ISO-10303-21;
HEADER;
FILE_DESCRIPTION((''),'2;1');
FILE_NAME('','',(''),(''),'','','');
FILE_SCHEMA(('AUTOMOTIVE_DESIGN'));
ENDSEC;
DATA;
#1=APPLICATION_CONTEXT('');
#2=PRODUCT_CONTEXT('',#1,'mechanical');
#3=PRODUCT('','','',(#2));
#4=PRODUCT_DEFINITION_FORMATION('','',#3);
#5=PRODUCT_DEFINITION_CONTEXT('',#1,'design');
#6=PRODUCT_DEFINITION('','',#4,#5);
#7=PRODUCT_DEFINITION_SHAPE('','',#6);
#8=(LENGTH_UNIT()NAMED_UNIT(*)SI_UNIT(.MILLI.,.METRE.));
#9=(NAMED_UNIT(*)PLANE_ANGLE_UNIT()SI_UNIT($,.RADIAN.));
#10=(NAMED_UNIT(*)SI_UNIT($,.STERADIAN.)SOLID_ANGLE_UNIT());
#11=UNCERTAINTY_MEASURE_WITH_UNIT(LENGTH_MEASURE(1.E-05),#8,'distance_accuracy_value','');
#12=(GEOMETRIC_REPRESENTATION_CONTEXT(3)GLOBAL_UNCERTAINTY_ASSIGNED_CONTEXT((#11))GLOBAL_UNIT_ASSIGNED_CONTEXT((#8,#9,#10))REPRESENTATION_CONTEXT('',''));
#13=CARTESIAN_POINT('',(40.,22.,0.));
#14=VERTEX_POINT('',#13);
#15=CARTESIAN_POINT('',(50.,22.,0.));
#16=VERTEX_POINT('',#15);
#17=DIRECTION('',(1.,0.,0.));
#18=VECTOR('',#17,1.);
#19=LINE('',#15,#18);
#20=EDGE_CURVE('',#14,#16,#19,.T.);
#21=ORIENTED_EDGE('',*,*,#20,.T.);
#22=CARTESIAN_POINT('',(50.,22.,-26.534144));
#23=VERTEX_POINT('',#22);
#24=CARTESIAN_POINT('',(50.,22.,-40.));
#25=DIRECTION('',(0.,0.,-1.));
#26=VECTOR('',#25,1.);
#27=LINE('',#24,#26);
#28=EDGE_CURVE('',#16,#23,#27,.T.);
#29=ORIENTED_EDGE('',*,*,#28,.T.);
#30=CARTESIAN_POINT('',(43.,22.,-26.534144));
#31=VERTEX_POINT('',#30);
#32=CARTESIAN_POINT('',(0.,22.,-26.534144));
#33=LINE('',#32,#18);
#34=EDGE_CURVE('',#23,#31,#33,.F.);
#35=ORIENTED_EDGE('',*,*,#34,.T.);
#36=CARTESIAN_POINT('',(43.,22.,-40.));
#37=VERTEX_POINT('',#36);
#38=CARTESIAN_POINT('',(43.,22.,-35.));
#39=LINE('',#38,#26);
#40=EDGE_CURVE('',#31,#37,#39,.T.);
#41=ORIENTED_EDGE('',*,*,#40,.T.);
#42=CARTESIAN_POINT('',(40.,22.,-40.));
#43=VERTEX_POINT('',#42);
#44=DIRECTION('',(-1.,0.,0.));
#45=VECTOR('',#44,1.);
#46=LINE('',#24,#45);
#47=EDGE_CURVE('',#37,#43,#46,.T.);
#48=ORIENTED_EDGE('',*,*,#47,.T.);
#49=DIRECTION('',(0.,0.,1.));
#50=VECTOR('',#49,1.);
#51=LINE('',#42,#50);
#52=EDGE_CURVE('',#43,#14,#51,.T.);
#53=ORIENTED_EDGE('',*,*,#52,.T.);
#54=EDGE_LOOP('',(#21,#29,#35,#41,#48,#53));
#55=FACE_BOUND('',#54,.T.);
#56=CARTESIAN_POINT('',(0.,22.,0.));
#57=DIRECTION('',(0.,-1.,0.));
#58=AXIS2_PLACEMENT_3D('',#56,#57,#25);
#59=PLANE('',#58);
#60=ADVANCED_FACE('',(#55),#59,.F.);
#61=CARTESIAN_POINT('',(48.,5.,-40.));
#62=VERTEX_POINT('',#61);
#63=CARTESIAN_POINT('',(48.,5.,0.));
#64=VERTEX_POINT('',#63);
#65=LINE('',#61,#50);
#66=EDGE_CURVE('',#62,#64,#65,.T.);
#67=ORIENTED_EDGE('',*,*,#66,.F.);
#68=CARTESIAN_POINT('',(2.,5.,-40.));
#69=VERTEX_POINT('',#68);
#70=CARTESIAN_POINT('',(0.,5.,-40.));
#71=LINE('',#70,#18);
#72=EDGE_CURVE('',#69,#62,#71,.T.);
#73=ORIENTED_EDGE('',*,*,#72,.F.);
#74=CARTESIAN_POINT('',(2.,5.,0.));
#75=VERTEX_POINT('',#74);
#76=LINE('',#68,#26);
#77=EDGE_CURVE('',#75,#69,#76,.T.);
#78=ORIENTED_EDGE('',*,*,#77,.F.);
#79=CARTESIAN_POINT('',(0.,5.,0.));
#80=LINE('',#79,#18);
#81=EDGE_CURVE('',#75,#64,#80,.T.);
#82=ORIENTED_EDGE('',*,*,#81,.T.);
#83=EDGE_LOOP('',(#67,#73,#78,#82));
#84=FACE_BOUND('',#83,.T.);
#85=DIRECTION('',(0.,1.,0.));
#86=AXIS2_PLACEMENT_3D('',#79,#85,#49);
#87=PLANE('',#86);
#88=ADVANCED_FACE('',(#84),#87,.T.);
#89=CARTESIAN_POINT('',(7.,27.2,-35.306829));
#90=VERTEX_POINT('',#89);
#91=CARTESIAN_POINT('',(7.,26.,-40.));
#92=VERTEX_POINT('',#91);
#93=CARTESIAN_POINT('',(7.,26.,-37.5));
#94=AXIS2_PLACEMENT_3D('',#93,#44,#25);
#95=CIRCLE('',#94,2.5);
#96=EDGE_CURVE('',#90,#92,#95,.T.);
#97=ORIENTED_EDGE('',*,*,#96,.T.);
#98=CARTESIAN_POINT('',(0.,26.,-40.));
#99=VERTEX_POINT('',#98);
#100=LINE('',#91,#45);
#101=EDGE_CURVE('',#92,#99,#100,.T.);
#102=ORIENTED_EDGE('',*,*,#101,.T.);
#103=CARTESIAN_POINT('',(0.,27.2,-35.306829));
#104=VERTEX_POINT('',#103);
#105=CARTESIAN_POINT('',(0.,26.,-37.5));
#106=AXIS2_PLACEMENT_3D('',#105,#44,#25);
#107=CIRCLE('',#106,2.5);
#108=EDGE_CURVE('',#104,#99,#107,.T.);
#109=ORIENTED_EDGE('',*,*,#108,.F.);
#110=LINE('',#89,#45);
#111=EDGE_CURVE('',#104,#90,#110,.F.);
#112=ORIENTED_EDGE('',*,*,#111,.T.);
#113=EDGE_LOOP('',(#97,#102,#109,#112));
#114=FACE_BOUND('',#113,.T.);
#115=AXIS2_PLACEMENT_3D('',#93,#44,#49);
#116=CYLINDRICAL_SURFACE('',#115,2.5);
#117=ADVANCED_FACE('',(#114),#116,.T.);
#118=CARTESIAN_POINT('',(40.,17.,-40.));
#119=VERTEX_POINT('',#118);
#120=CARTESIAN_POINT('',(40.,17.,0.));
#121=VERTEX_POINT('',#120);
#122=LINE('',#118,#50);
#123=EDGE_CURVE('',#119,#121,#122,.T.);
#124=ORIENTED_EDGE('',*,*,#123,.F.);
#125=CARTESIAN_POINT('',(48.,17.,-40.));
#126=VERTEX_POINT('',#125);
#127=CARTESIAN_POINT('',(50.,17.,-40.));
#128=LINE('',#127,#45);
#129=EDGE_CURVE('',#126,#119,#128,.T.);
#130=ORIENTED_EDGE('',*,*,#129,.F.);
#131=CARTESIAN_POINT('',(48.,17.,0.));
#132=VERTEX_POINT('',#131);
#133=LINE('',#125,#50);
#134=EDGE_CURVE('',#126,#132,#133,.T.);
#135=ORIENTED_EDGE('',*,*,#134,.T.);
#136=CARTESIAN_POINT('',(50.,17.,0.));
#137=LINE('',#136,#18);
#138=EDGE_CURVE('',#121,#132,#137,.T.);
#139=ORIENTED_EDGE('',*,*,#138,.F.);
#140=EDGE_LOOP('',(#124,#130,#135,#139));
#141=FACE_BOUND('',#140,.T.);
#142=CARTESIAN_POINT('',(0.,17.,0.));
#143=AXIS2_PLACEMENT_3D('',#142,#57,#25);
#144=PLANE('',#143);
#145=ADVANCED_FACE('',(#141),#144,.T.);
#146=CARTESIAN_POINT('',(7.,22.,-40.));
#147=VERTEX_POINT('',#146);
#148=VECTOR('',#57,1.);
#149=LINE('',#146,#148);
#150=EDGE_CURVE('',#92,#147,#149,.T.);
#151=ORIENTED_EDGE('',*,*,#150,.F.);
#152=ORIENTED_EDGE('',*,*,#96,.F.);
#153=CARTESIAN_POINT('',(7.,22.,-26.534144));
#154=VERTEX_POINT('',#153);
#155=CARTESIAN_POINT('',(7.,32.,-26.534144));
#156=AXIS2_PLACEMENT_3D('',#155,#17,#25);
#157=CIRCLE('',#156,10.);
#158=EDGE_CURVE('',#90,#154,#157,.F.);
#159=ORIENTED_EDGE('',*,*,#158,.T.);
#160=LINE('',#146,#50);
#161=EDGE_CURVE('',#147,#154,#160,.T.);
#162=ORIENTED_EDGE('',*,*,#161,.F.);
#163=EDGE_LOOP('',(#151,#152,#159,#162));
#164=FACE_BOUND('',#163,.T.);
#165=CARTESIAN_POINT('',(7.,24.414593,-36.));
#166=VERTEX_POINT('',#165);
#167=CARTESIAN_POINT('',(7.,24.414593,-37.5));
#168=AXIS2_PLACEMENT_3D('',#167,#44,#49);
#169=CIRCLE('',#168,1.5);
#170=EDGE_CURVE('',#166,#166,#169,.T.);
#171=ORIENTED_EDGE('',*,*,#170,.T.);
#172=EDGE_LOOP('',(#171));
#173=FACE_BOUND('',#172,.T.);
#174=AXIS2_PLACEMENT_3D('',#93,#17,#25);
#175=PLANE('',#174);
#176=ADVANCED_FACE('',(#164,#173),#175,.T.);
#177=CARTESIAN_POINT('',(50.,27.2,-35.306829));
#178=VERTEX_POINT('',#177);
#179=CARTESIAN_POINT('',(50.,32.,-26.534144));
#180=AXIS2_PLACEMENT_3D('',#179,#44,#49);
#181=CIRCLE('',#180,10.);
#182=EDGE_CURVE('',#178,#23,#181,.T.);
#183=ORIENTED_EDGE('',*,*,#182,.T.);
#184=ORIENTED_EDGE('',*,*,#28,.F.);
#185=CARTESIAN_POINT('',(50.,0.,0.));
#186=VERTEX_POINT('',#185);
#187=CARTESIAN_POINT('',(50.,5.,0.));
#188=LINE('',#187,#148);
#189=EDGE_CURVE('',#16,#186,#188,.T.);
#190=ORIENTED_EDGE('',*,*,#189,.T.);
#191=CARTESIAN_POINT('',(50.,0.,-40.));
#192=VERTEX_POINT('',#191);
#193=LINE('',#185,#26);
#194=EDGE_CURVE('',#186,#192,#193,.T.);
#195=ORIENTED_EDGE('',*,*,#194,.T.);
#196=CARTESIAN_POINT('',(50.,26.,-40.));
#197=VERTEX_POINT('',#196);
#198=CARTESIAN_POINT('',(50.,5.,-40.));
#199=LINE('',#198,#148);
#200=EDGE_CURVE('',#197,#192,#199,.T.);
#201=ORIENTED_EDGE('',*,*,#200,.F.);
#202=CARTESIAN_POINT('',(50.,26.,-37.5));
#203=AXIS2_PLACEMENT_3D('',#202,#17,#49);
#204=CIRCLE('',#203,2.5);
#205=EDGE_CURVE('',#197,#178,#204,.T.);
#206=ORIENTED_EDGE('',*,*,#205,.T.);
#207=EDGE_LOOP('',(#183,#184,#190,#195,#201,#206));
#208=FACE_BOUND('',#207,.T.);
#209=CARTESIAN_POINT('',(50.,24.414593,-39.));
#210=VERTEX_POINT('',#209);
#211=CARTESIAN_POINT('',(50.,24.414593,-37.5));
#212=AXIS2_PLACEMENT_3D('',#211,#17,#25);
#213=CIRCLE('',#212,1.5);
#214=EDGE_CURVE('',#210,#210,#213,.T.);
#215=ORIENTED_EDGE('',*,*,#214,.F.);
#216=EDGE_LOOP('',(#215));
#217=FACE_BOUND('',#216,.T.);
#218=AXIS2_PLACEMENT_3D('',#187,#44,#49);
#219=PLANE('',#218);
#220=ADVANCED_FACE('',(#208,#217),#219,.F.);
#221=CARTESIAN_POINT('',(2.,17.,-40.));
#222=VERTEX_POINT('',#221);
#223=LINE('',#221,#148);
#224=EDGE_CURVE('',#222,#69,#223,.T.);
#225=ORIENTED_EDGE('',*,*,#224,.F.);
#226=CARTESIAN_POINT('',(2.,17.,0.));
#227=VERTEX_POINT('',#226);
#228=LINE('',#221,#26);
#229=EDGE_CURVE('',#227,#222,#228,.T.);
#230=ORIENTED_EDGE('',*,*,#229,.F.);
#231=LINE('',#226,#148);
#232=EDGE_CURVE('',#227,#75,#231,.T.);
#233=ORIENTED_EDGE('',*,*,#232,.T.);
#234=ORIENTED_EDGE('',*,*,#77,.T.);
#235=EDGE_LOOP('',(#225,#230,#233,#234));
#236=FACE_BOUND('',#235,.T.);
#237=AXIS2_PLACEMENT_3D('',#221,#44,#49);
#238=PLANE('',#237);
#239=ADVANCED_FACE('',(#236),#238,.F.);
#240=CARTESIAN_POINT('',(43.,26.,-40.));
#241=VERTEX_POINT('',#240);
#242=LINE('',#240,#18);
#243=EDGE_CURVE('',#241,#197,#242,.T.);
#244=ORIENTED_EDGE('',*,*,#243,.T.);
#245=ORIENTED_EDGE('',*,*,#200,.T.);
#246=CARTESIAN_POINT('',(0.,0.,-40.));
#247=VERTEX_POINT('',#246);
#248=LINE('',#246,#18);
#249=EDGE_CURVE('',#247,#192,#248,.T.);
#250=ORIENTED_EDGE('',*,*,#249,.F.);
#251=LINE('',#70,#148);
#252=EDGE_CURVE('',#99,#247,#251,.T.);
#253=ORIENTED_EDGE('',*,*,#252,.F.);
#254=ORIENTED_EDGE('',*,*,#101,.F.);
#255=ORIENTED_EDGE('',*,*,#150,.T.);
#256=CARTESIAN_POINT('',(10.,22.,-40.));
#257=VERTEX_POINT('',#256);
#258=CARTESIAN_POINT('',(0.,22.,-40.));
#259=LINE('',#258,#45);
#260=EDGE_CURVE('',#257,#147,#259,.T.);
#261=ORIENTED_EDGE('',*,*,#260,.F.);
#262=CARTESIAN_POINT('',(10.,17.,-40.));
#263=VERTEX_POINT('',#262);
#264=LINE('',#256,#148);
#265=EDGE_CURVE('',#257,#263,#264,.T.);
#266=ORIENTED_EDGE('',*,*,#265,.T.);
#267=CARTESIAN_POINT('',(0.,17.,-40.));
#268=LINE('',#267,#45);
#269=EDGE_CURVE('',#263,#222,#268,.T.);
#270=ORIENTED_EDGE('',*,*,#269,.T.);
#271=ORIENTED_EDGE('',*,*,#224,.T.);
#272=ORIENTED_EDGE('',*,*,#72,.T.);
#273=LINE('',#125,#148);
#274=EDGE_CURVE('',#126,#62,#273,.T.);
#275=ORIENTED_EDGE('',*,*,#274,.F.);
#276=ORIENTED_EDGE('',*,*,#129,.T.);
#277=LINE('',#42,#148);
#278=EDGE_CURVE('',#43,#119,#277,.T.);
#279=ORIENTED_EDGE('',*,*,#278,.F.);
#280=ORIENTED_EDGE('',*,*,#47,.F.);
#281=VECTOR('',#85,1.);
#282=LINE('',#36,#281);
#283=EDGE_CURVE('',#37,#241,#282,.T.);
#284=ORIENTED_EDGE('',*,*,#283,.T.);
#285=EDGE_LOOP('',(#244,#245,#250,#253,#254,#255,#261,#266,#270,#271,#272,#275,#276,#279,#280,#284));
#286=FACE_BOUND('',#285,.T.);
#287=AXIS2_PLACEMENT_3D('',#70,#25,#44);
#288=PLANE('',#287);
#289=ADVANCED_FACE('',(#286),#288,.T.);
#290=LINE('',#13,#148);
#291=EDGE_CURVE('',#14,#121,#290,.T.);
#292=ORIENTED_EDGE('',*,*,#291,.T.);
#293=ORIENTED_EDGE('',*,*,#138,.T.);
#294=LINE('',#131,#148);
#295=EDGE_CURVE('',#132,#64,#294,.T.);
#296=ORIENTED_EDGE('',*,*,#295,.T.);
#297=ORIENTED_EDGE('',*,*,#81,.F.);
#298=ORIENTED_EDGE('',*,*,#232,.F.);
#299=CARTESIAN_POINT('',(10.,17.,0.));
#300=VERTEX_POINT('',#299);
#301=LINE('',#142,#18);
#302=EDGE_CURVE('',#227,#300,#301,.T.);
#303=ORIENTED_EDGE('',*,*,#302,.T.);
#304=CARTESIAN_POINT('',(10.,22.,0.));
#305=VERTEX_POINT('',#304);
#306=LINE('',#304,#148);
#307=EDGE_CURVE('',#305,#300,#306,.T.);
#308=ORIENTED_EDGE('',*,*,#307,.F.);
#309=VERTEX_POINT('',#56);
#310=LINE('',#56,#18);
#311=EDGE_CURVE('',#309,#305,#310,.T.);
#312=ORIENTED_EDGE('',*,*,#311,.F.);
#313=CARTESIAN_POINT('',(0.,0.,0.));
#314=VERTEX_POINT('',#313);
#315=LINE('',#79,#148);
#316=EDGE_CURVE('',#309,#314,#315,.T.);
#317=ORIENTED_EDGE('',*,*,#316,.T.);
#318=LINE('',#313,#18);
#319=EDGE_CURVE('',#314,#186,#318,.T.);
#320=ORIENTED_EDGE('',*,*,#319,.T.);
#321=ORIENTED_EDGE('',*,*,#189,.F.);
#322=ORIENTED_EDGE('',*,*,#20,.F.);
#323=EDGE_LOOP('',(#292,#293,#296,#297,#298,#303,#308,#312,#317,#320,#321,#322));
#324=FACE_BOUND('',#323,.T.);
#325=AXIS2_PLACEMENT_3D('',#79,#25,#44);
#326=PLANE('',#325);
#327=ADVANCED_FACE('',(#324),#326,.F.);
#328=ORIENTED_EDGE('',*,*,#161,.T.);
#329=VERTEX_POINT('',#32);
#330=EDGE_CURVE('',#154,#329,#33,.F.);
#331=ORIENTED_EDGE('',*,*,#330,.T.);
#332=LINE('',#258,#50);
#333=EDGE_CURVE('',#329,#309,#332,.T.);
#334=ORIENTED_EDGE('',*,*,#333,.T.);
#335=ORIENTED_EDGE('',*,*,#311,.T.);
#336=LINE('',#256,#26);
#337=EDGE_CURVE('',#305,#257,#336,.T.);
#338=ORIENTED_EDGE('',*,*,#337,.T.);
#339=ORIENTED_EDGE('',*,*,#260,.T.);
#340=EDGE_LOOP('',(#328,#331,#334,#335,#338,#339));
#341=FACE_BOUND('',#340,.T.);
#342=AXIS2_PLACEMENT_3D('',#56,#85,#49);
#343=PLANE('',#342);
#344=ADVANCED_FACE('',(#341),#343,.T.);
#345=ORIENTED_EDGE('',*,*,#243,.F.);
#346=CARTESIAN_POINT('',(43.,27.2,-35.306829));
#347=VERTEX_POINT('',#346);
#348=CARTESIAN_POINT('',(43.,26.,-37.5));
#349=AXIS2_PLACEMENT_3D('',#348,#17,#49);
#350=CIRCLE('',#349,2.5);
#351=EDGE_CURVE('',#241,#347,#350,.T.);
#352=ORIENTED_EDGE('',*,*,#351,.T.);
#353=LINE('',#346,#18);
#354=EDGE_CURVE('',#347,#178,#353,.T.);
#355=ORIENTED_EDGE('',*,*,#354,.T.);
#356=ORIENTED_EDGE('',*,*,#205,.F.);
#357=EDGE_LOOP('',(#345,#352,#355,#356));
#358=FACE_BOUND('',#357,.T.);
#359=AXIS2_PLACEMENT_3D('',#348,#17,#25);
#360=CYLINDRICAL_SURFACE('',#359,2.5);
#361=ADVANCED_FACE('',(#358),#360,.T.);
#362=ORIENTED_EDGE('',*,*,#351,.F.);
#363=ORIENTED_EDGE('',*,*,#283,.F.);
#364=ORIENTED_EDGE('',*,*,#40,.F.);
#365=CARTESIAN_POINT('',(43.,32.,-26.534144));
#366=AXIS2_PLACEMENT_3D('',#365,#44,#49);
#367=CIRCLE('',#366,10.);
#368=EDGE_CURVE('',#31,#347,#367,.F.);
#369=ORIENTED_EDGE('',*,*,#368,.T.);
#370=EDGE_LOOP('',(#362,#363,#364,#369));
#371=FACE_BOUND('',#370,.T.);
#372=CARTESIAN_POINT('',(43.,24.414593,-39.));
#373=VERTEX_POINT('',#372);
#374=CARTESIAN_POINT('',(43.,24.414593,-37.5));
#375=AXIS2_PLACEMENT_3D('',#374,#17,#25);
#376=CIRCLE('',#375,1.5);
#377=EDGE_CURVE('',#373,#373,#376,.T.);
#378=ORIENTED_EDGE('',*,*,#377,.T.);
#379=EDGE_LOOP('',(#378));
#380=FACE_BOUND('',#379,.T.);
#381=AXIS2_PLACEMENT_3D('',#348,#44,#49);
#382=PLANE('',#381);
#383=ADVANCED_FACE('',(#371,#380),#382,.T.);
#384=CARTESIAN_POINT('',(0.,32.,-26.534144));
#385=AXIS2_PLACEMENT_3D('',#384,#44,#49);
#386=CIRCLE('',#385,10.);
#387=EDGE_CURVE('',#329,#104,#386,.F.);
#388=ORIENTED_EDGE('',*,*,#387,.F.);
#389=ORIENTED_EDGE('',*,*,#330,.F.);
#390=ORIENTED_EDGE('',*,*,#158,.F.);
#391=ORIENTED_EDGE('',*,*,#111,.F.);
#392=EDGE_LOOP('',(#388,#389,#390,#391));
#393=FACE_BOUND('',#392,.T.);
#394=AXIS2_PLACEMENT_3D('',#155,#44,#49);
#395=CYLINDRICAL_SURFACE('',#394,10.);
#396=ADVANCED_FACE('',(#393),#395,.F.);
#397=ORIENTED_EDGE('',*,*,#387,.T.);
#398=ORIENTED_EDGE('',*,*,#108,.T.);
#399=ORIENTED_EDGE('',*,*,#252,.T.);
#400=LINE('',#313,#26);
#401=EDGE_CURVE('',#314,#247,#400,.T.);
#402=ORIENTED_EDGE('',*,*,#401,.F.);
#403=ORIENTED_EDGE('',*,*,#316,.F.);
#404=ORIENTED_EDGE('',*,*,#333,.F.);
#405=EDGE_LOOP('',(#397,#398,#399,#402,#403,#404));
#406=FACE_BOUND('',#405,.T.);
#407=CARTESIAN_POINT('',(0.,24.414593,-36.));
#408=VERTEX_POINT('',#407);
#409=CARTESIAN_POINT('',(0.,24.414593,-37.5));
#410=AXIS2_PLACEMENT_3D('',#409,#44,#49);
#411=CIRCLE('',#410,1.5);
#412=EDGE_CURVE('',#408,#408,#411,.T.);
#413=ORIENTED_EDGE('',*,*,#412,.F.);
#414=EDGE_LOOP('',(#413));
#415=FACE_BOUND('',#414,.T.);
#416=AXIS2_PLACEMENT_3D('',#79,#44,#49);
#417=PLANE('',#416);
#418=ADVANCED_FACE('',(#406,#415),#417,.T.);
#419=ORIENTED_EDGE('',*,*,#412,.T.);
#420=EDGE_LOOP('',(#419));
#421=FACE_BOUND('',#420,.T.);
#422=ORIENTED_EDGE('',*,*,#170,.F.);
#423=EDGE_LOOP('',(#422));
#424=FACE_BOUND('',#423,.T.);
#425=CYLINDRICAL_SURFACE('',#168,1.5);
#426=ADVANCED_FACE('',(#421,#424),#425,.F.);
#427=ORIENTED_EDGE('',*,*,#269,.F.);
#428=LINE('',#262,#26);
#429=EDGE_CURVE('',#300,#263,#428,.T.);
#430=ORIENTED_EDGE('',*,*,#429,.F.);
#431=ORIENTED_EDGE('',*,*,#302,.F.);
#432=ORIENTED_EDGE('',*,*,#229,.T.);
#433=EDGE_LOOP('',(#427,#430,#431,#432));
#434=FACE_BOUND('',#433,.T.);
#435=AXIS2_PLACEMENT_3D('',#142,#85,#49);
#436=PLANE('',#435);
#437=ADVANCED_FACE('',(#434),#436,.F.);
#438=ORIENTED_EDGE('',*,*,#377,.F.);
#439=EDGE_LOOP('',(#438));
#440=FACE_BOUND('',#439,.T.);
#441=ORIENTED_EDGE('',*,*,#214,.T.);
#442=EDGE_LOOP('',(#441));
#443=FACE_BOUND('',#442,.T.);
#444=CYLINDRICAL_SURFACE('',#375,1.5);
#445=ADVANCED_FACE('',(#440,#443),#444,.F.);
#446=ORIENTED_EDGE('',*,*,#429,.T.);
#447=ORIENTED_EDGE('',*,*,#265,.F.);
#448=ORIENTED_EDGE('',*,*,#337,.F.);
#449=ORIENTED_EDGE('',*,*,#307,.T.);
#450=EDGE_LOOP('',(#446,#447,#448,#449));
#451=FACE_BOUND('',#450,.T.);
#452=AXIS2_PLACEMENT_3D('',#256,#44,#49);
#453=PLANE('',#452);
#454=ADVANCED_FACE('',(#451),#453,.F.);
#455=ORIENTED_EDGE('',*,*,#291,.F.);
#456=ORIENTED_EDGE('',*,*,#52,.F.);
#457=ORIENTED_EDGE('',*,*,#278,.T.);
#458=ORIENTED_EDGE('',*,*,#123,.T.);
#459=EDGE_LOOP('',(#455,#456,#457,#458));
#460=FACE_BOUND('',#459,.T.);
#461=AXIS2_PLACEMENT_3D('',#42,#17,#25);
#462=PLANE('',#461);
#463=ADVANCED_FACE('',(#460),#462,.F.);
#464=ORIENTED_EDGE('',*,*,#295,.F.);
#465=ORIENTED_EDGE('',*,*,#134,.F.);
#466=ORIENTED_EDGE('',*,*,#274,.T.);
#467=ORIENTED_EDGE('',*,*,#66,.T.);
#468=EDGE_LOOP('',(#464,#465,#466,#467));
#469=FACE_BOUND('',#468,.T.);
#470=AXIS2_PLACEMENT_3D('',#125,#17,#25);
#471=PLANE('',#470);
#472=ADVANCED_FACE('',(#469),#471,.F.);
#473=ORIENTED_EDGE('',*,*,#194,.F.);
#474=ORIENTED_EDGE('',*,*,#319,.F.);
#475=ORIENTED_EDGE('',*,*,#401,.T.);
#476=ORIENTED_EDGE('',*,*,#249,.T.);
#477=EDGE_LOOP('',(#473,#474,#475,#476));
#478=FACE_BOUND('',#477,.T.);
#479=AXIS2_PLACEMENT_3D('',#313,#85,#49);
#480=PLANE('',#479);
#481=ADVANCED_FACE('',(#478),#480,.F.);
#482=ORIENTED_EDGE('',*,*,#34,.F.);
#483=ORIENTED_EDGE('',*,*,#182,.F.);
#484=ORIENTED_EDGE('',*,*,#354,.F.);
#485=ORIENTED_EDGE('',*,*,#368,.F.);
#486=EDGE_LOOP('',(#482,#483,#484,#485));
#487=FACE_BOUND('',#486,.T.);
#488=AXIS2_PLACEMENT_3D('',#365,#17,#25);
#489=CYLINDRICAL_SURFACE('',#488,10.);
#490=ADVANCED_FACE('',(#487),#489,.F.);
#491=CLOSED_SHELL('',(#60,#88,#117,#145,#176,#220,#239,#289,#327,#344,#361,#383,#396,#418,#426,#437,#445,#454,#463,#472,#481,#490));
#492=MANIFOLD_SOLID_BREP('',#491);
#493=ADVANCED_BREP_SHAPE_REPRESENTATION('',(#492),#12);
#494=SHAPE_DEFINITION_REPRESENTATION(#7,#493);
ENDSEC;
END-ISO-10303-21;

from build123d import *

# Parameters (mm, degrees)
SKETCH1_W           = 50
SKETCH1_H           = 40
BOSS_EXTRUDE2_DEPTH = 5
SKETCH2_W           = 2
SKETCH2_H           = 40
BOSS_EXTRUDE4_DEPTH = 12
SKETCH3_W           = 10
SKETCH3_H           = 40
BOSS_EXTRUDE5_DEPTH = 5
SKETCH5_R           = 1.5
BOSS_EXTRUDE6_DEPTH = 7
FILLET1_R           = 10
BOSS_EXTRUDE7_START = -7
SKETCH6_R           = 1.5
BOSS_EXTRUDE7_DEPTH = 7
FILLET2_R           = 10


with BuildPart() as part:
    # Sketch1 → Boss-Extrude2 (new body)
    with BuildSketch(Plane(origin=(0, 0, 0), x_dir=(1, 0, 0), z_dir=(0, 1, 0))):
        with Locations((25, 20)):
            Rectangle(SKETCH1_W, SKETCH1_H)
    extrude(amount=BOSS_EXTRUDE2_DEPTH)

    # Sketch2 → Boss-Extrude4 (add)
    with BuildSketch(Plane(origin=(0, 5, 0), x_dir=(1, 0, 0), z_dir=(0, 1, 0))):
        with Locations((1, 20)):
            Rectangle(SKETCH2_W, SKETCH2_H)
        with Locations((49, 20)):
            Rectangle(SKETCH2_W, SKETCH2_H)
    extrude(amount=BOSS_EXTRUDE4_DEPTH)

    # Sketch3 → Boss-Extrude5 (add)
    with BuildSketch(Plane(origin=(0, 17, 0), x_dir=(1, 0, 0), z_dir=(0, 1, 0))):
        with Locations((5, 20)):
            Rectangle(SKETCH3_W, SKETCH3_H)
        with Locations((45, 20)):
            Rectangle(SKETCH3_W, SKETCH3_H)
    extrude(amount=BOSS_EXTRUDE5_DEPTH)

    # Sketch5 → Boss-Extrude6 (add)
    with BuildSketch(Plane.ZY):
        with BuildLine():
            Line((-40, 22), (-35, 22))
            Line((-35, 22), (-35, 26))
            ThreePointArc((-35, 26), (-37.5, 28.5), (-40, 26))
            Line((-40, 26), (-40, 22))
        make_face()
        with Locations((-37.5, 24.41459259)):
            Circle(SKETCH5_R, mode=Mode.SUBTRACT)
    extrude(amount=-BOSS_EXTRUDE6_DEPTH)

    # Fillet1
    # the kernel refuses this fillet: 10 mm, written as the material it adds along each edge
    with BuildSketch(Plane(origin=(0, 22, -35), x_dir=(0, 0.99826370600864, -0.058903083670516616), z_dir=(1, 0, 0))) as fillet1_piece_1:
        with BuildLine():
            CenterArc((9.48397203, 9.040187721), FILLET1_R, 183.376852724, 61.314597986)
            Line((-0.49866503, 8.451156885), (-1.496928736, 8.392253801))
            Line((-1.496928736, 8.392253801), (-0.998263706, -0.058903084))
            Line((-0.998263706, -0.058903084), (0.058903084, -0.998263706))
            ThreePointArc((0.058903084, -0.998263706), (4.051957908, -0.762651371), (4.781551673, -0.904018772))
            Line((4.781551673, -0.904018772), (5.209044433, 0))
        make_face()
    extrude(amount=7)

    # Sketch6 → Boss-Extrude7 (add)
    with BuildSketch(Plane(origin=(50, 0, 0), x_dir=(0, 0, -1), z_dir=(1, 0, 0)).offset(BOSS_EXTRUDE7_START)):
        with BuildLine():
            Line((35, 22), (40, 22))
            Line((40, 22), (40, 26))
            ThreePointArc((40, 26), (37.5, 28.5), (35, 26))
            Line((35, 26), (35, 22))
        make_face()
        with Locations(Location((37.5, 24.41459259, 0), (0, 0, 180))):
            Circle(SKETCH6_R, mode=Mode.SUBTRACT)
    extrude(amount=BOSS_EXTRUDE7_DEPTH)

    # Fillet2
    # the kernel refuses this fillet: 10 mm, written as the material it adds along each edge
    with BuildSketch(Plane(origin=(43, 22, -35), x_dir=(0, 0, 1), z_dir=(1, 0, 0))) as fillet2_piece_1:
        with BuildLine():
            CenterArc((8.4658561, -10), FILLET2_R, 90, 61.314597986)
            Line((-0.30682878, -5.2), (-1.184097268, -4.72))
            ThreePointArc((-1.184097268, -4.72), (-1, -4), (-1, 0))
            Line((-1, 0), (0, 1))
            Line((0, 1), (8.4658561, 1))
            Line((8.4658561, 1), (8.4658561, 0))
        make_face()
    extrude(amount=7)


solid = part.part
